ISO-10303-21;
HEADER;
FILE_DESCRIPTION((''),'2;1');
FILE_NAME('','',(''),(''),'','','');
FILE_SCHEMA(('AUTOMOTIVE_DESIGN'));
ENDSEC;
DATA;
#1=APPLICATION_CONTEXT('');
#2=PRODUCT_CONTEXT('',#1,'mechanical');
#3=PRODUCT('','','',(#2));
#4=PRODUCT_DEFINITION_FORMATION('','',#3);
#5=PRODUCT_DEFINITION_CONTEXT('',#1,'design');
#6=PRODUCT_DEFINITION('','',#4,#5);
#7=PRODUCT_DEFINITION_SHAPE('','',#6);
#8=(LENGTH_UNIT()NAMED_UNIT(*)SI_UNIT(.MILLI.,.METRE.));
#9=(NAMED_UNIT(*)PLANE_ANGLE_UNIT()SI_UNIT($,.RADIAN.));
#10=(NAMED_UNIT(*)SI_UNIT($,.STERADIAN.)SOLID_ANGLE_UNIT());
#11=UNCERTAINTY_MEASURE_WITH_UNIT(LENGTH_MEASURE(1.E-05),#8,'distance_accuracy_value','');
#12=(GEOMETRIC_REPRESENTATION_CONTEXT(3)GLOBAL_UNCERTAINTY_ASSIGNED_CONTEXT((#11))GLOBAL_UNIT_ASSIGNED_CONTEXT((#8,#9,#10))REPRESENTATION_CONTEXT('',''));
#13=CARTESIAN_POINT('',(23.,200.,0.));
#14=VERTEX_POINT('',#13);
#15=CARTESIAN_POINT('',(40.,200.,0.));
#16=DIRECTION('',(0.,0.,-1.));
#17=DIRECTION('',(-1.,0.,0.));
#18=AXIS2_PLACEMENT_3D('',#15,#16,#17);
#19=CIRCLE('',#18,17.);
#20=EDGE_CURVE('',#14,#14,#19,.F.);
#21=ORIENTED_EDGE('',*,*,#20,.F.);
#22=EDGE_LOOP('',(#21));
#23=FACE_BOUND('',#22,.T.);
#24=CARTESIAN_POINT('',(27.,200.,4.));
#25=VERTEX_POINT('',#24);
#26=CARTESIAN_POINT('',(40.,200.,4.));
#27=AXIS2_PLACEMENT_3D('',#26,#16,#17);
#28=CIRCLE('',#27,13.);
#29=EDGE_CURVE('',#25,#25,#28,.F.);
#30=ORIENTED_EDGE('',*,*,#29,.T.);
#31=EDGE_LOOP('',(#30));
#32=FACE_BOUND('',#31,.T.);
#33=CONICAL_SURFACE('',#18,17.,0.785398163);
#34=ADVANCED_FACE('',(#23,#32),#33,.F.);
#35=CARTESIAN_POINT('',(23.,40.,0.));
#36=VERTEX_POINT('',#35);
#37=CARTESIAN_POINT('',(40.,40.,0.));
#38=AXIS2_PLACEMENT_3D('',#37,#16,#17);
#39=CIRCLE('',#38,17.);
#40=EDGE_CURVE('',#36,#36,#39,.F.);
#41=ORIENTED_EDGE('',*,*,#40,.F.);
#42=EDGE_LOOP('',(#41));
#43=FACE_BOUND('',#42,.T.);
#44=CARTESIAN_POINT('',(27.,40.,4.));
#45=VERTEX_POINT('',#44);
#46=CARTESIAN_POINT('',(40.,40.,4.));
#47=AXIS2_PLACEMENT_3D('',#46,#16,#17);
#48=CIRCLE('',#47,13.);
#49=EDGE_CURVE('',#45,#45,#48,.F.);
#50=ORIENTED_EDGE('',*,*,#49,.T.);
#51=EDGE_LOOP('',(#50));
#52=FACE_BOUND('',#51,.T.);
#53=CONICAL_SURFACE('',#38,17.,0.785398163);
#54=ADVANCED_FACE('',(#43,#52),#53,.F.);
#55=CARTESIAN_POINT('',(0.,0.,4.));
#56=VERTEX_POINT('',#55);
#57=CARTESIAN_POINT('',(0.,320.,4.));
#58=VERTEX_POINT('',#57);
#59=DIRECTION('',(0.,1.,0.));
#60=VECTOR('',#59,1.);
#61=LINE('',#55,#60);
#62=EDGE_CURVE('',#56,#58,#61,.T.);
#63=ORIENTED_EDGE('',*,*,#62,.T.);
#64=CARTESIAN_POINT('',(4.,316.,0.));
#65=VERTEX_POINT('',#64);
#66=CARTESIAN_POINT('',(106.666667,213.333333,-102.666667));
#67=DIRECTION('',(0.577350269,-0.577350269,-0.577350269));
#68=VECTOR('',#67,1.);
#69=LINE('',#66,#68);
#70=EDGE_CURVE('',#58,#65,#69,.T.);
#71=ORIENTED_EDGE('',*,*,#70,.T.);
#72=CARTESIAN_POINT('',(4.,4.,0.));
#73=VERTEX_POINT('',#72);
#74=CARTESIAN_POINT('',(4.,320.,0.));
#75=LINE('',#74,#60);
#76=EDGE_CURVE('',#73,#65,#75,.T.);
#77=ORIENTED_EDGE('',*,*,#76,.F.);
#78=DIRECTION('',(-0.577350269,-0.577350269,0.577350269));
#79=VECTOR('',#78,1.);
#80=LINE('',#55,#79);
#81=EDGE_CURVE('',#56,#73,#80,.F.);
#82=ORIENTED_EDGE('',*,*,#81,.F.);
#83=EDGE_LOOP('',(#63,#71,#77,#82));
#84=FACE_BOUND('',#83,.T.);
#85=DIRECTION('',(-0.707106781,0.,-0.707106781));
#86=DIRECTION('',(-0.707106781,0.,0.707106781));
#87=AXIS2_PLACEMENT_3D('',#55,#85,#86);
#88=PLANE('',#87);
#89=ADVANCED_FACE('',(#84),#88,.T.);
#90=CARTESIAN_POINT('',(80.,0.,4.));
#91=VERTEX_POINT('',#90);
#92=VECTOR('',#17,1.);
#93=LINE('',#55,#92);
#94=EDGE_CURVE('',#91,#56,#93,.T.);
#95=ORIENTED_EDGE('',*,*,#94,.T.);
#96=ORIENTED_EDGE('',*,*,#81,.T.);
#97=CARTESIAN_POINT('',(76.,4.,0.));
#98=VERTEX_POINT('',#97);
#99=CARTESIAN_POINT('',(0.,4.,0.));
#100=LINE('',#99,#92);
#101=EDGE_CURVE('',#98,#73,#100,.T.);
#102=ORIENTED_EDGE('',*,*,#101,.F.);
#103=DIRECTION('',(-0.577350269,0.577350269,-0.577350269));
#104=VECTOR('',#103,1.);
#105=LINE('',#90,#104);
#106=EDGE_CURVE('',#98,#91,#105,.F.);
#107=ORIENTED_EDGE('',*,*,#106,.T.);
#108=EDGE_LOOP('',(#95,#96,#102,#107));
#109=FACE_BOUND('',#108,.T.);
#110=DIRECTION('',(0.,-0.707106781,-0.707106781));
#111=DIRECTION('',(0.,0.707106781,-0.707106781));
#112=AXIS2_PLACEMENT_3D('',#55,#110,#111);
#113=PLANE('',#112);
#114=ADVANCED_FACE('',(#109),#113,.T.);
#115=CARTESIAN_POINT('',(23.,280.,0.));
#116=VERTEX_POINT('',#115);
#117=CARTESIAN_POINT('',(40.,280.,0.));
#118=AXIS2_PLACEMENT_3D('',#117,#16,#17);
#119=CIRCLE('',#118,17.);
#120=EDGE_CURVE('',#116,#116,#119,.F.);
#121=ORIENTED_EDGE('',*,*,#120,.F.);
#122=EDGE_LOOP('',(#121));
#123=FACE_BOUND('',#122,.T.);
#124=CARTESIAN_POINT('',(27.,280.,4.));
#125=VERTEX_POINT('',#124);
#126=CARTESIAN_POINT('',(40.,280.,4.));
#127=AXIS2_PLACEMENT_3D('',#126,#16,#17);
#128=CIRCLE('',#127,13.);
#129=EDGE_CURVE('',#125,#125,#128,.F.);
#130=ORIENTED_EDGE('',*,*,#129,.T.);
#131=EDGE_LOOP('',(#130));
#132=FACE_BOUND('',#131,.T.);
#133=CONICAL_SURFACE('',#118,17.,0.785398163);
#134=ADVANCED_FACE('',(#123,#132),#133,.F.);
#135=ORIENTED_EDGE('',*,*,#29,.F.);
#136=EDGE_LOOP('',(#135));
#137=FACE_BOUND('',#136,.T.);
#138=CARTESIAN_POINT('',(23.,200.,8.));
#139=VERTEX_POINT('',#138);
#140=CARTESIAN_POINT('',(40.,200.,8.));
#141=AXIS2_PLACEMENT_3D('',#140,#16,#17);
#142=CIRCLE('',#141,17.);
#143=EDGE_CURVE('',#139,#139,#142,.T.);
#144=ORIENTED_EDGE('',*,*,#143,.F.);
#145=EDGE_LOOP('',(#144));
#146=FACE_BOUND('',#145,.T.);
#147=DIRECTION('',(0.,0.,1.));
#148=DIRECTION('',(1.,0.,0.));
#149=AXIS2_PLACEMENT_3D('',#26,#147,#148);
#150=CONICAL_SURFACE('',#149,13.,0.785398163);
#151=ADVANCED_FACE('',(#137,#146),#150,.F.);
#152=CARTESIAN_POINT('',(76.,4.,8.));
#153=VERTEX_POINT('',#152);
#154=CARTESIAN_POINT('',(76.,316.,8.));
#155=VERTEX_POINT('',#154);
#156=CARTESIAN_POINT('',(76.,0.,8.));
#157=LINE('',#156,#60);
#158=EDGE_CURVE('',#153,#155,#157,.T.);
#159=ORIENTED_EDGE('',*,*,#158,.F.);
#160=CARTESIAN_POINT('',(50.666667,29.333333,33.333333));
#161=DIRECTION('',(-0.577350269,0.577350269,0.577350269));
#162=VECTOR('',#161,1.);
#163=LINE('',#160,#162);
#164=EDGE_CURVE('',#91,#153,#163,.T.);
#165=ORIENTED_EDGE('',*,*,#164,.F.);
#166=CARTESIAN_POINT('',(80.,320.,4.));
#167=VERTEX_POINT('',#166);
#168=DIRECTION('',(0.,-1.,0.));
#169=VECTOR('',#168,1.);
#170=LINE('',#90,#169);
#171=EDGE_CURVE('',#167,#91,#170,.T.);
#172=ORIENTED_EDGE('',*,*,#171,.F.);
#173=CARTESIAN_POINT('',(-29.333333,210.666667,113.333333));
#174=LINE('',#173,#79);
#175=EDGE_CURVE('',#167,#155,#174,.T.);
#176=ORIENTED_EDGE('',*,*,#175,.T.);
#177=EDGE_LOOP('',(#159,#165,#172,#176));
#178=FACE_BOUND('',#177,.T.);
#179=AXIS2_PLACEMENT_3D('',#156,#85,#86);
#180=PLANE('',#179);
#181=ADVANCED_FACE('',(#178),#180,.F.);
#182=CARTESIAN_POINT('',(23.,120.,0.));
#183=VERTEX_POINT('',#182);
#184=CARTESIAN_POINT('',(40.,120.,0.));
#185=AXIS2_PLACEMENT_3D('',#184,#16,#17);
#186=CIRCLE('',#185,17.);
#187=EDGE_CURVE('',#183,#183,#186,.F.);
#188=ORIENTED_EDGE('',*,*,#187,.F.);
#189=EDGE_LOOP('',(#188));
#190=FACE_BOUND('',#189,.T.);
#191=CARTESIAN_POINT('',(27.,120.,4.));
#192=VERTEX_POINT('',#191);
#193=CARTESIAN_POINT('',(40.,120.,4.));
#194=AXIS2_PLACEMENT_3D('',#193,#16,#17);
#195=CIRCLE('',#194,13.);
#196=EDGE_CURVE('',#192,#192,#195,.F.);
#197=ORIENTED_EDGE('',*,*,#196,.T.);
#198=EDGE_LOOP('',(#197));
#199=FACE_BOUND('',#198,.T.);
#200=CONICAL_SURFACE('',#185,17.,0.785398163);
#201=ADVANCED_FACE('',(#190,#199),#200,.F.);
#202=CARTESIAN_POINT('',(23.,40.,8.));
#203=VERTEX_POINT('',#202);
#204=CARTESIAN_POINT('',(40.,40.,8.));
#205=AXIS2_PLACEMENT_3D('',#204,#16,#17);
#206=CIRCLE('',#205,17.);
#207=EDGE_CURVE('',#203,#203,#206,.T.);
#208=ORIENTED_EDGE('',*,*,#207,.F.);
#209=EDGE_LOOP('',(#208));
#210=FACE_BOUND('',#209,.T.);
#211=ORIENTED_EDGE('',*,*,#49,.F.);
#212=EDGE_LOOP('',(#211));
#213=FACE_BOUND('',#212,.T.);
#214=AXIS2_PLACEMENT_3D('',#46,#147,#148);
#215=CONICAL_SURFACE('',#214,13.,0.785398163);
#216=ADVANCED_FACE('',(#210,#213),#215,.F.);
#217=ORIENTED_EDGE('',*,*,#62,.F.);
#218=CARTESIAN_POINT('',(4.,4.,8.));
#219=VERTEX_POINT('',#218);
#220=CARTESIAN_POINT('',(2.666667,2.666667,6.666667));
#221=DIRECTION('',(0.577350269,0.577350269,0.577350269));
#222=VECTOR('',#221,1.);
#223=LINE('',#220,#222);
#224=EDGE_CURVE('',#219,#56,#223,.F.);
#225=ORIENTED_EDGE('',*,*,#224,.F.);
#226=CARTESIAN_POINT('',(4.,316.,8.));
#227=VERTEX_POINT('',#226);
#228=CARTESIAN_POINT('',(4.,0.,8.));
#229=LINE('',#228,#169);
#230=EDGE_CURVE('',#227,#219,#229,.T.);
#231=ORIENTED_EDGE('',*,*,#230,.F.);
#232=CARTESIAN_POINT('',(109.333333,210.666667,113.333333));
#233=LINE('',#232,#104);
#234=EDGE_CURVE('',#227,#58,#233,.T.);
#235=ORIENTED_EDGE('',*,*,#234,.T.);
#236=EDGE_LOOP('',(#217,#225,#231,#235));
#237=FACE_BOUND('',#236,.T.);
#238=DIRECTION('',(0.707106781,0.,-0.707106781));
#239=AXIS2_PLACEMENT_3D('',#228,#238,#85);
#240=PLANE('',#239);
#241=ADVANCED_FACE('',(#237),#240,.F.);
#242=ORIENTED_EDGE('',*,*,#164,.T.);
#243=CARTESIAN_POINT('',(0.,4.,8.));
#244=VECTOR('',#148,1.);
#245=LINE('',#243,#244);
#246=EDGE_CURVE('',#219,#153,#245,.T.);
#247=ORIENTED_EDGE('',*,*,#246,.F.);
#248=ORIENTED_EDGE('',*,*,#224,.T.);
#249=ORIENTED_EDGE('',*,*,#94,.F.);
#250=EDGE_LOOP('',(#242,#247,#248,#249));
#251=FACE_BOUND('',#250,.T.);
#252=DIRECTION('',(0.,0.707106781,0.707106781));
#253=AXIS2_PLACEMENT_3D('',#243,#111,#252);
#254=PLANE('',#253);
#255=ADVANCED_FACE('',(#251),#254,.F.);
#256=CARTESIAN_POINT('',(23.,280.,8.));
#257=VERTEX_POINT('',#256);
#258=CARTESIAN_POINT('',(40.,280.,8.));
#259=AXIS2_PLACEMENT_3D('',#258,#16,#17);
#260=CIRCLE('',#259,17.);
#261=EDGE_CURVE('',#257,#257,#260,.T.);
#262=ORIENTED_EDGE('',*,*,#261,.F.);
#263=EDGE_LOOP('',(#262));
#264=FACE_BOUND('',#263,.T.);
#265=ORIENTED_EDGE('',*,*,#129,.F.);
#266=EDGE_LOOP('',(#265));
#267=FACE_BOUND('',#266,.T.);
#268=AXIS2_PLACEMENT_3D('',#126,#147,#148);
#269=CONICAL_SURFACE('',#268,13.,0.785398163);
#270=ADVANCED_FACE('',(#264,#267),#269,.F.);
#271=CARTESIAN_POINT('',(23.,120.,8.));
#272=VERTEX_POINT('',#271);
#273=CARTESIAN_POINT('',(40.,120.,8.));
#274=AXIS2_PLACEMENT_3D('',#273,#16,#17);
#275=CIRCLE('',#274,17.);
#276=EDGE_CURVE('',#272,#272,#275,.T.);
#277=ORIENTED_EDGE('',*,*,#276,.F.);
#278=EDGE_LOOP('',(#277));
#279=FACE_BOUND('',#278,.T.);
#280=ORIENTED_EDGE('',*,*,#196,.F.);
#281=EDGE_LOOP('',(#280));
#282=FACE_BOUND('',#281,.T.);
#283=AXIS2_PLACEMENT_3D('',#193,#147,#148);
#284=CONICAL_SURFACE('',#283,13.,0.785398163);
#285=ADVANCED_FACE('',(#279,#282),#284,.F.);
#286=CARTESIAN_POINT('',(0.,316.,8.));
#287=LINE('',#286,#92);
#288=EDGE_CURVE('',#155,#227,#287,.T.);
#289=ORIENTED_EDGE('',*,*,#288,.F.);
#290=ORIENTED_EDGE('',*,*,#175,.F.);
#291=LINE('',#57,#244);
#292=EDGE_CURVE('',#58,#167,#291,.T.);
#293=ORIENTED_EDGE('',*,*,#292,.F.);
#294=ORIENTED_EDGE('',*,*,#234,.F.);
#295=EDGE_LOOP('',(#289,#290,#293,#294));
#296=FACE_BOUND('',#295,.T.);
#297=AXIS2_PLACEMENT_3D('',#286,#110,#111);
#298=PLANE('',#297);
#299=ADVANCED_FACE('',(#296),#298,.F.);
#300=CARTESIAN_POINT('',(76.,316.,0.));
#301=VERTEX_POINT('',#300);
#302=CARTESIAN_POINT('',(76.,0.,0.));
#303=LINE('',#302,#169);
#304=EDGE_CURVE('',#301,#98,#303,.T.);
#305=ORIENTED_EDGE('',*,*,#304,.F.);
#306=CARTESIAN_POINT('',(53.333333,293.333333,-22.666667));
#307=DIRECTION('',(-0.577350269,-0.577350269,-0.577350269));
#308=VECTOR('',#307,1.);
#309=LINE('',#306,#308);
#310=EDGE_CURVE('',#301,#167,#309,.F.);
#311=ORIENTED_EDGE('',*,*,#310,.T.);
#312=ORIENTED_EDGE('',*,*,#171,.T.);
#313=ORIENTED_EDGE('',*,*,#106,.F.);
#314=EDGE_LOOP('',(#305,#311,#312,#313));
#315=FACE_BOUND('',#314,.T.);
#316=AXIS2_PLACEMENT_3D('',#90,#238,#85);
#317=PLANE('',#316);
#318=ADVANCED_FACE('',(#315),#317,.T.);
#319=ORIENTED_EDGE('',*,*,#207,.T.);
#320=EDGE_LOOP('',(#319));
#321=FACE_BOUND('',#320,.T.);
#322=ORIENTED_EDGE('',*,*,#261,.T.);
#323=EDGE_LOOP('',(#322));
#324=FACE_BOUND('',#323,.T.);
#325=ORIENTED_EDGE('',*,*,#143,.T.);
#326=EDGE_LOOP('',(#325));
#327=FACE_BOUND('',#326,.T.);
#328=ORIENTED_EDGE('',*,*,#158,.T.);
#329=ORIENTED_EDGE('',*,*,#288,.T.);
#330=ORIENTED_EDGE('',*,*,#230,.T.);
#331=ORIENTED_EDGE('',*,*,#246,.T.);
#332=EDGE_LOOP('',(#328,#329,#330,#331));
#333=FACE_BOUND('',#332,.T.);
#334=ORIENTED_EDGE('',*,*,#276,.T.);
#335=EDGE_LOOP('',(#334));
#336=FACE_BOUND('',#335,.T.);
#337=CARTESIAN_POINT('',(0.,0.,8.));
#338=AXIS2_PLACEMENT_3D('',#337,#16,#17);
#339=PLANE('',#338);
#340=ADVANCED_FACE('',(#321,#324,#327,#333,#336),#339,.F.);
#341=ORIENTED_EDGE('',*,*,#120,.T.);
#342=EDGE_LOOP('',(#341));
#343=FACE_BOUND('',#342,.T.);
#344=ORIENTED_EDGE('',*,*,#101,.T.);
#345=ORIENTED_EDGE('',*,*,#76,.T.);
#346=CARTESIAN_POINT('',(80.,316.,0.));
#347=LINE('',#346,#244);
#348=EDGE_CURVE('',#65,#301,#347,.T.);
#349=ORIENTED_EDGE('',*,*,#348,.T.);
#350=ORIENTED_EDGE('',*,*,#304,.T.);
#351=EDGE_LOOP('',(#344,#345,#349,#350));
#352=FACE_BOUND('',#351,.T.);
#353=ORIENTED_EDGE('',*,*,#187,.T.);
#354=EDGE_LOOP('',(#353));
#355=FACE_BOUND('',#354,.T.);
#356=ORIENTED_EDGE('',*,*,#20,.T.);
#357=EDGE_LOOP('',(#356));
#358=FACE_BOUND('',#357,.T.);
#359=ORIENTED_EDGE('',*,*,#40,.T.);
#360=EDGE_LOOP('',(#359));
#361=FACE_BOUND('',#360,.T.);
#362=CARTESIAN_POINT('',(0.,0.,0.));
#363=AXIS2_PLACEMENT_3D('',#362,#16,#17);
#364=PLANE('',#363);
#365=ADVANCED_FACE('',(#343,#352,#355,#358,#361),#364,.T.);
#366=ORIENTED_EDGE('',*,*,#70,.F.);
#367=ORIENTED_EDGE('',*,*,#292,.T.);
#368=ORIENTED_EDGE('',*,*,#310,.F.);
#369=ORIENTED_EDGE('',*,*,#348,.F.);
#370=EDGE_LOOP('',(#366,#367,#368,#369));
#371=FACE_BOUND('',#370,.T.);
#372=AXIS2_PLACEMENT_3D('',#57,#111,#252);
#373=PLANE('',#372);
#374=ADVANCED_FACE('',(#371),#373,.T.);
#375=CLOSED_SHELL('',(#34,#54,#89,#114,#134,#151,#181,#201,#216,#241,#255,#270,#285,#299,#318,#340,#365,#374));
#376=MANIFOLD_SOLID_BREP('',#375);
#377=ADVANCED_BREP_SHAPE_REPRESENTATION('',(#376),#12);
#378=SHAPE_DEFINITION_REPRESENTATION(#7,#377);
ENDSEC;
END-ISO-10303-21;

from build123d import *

# Parameters (mm, degrees)
SKETCH_1_W        = 80
SKETCH_1_H        = 320
SKETCH_1_R        = 13
EXTRUDE_324_DEPTH = 8
CHAMFER_1_SIZE    = 4


with BuildPart() as part:
    # 草图1 → Extrude 324 (new body)
    with BuildSketch(Plane.XY):
        with Locations((40, 160)):
            Rectangle(SKETCH_1_W, SKETCH_1_H)
        with Locations((40, 280)):
            Circle(SKETCH_1_R, mode=Mode.SUBTRACT)
        with Locations((40, 200)):
            Circle(SKETCH_1_R, mode=Mode.SUBTRACT)
        with Locations((40, 120)):
            Circle(SKETCH_1_R, mode=Mode.SUBTRACT)
        with Locations((40, 40)):
            Circle(SKETCH_1_R, mode=Mode.SUBTRACT)
    extrude(amount=EXTRUDE_324_DEPTH)

    # 倒角1
    chamfer_1_edges = [part.edges().sort_by_distance(p)[0] for p in [
        (27, 40, 0),
        (27, 200, 0),
        (40, 0, 0),
        (80, 160, 0),
        (40, 320, 0),
        (0, 160, 0),
        (27, 280, 0),
        (27, 120, 0),
        (27, 40, 8),
        (27, 200, 8),
        (40, 320, 8),
        (80, 160, 8),
        (40, 0, 8),
        (0, 160, 8),
        (27, 280, 8),
        (27, 120, 8),
    ]]
    chamfer(chamfer_1_edges, length=CHAMFER_1_SIZE - 0.0001)  # a hair under: the kernel refuses the full size


solid = part.part
